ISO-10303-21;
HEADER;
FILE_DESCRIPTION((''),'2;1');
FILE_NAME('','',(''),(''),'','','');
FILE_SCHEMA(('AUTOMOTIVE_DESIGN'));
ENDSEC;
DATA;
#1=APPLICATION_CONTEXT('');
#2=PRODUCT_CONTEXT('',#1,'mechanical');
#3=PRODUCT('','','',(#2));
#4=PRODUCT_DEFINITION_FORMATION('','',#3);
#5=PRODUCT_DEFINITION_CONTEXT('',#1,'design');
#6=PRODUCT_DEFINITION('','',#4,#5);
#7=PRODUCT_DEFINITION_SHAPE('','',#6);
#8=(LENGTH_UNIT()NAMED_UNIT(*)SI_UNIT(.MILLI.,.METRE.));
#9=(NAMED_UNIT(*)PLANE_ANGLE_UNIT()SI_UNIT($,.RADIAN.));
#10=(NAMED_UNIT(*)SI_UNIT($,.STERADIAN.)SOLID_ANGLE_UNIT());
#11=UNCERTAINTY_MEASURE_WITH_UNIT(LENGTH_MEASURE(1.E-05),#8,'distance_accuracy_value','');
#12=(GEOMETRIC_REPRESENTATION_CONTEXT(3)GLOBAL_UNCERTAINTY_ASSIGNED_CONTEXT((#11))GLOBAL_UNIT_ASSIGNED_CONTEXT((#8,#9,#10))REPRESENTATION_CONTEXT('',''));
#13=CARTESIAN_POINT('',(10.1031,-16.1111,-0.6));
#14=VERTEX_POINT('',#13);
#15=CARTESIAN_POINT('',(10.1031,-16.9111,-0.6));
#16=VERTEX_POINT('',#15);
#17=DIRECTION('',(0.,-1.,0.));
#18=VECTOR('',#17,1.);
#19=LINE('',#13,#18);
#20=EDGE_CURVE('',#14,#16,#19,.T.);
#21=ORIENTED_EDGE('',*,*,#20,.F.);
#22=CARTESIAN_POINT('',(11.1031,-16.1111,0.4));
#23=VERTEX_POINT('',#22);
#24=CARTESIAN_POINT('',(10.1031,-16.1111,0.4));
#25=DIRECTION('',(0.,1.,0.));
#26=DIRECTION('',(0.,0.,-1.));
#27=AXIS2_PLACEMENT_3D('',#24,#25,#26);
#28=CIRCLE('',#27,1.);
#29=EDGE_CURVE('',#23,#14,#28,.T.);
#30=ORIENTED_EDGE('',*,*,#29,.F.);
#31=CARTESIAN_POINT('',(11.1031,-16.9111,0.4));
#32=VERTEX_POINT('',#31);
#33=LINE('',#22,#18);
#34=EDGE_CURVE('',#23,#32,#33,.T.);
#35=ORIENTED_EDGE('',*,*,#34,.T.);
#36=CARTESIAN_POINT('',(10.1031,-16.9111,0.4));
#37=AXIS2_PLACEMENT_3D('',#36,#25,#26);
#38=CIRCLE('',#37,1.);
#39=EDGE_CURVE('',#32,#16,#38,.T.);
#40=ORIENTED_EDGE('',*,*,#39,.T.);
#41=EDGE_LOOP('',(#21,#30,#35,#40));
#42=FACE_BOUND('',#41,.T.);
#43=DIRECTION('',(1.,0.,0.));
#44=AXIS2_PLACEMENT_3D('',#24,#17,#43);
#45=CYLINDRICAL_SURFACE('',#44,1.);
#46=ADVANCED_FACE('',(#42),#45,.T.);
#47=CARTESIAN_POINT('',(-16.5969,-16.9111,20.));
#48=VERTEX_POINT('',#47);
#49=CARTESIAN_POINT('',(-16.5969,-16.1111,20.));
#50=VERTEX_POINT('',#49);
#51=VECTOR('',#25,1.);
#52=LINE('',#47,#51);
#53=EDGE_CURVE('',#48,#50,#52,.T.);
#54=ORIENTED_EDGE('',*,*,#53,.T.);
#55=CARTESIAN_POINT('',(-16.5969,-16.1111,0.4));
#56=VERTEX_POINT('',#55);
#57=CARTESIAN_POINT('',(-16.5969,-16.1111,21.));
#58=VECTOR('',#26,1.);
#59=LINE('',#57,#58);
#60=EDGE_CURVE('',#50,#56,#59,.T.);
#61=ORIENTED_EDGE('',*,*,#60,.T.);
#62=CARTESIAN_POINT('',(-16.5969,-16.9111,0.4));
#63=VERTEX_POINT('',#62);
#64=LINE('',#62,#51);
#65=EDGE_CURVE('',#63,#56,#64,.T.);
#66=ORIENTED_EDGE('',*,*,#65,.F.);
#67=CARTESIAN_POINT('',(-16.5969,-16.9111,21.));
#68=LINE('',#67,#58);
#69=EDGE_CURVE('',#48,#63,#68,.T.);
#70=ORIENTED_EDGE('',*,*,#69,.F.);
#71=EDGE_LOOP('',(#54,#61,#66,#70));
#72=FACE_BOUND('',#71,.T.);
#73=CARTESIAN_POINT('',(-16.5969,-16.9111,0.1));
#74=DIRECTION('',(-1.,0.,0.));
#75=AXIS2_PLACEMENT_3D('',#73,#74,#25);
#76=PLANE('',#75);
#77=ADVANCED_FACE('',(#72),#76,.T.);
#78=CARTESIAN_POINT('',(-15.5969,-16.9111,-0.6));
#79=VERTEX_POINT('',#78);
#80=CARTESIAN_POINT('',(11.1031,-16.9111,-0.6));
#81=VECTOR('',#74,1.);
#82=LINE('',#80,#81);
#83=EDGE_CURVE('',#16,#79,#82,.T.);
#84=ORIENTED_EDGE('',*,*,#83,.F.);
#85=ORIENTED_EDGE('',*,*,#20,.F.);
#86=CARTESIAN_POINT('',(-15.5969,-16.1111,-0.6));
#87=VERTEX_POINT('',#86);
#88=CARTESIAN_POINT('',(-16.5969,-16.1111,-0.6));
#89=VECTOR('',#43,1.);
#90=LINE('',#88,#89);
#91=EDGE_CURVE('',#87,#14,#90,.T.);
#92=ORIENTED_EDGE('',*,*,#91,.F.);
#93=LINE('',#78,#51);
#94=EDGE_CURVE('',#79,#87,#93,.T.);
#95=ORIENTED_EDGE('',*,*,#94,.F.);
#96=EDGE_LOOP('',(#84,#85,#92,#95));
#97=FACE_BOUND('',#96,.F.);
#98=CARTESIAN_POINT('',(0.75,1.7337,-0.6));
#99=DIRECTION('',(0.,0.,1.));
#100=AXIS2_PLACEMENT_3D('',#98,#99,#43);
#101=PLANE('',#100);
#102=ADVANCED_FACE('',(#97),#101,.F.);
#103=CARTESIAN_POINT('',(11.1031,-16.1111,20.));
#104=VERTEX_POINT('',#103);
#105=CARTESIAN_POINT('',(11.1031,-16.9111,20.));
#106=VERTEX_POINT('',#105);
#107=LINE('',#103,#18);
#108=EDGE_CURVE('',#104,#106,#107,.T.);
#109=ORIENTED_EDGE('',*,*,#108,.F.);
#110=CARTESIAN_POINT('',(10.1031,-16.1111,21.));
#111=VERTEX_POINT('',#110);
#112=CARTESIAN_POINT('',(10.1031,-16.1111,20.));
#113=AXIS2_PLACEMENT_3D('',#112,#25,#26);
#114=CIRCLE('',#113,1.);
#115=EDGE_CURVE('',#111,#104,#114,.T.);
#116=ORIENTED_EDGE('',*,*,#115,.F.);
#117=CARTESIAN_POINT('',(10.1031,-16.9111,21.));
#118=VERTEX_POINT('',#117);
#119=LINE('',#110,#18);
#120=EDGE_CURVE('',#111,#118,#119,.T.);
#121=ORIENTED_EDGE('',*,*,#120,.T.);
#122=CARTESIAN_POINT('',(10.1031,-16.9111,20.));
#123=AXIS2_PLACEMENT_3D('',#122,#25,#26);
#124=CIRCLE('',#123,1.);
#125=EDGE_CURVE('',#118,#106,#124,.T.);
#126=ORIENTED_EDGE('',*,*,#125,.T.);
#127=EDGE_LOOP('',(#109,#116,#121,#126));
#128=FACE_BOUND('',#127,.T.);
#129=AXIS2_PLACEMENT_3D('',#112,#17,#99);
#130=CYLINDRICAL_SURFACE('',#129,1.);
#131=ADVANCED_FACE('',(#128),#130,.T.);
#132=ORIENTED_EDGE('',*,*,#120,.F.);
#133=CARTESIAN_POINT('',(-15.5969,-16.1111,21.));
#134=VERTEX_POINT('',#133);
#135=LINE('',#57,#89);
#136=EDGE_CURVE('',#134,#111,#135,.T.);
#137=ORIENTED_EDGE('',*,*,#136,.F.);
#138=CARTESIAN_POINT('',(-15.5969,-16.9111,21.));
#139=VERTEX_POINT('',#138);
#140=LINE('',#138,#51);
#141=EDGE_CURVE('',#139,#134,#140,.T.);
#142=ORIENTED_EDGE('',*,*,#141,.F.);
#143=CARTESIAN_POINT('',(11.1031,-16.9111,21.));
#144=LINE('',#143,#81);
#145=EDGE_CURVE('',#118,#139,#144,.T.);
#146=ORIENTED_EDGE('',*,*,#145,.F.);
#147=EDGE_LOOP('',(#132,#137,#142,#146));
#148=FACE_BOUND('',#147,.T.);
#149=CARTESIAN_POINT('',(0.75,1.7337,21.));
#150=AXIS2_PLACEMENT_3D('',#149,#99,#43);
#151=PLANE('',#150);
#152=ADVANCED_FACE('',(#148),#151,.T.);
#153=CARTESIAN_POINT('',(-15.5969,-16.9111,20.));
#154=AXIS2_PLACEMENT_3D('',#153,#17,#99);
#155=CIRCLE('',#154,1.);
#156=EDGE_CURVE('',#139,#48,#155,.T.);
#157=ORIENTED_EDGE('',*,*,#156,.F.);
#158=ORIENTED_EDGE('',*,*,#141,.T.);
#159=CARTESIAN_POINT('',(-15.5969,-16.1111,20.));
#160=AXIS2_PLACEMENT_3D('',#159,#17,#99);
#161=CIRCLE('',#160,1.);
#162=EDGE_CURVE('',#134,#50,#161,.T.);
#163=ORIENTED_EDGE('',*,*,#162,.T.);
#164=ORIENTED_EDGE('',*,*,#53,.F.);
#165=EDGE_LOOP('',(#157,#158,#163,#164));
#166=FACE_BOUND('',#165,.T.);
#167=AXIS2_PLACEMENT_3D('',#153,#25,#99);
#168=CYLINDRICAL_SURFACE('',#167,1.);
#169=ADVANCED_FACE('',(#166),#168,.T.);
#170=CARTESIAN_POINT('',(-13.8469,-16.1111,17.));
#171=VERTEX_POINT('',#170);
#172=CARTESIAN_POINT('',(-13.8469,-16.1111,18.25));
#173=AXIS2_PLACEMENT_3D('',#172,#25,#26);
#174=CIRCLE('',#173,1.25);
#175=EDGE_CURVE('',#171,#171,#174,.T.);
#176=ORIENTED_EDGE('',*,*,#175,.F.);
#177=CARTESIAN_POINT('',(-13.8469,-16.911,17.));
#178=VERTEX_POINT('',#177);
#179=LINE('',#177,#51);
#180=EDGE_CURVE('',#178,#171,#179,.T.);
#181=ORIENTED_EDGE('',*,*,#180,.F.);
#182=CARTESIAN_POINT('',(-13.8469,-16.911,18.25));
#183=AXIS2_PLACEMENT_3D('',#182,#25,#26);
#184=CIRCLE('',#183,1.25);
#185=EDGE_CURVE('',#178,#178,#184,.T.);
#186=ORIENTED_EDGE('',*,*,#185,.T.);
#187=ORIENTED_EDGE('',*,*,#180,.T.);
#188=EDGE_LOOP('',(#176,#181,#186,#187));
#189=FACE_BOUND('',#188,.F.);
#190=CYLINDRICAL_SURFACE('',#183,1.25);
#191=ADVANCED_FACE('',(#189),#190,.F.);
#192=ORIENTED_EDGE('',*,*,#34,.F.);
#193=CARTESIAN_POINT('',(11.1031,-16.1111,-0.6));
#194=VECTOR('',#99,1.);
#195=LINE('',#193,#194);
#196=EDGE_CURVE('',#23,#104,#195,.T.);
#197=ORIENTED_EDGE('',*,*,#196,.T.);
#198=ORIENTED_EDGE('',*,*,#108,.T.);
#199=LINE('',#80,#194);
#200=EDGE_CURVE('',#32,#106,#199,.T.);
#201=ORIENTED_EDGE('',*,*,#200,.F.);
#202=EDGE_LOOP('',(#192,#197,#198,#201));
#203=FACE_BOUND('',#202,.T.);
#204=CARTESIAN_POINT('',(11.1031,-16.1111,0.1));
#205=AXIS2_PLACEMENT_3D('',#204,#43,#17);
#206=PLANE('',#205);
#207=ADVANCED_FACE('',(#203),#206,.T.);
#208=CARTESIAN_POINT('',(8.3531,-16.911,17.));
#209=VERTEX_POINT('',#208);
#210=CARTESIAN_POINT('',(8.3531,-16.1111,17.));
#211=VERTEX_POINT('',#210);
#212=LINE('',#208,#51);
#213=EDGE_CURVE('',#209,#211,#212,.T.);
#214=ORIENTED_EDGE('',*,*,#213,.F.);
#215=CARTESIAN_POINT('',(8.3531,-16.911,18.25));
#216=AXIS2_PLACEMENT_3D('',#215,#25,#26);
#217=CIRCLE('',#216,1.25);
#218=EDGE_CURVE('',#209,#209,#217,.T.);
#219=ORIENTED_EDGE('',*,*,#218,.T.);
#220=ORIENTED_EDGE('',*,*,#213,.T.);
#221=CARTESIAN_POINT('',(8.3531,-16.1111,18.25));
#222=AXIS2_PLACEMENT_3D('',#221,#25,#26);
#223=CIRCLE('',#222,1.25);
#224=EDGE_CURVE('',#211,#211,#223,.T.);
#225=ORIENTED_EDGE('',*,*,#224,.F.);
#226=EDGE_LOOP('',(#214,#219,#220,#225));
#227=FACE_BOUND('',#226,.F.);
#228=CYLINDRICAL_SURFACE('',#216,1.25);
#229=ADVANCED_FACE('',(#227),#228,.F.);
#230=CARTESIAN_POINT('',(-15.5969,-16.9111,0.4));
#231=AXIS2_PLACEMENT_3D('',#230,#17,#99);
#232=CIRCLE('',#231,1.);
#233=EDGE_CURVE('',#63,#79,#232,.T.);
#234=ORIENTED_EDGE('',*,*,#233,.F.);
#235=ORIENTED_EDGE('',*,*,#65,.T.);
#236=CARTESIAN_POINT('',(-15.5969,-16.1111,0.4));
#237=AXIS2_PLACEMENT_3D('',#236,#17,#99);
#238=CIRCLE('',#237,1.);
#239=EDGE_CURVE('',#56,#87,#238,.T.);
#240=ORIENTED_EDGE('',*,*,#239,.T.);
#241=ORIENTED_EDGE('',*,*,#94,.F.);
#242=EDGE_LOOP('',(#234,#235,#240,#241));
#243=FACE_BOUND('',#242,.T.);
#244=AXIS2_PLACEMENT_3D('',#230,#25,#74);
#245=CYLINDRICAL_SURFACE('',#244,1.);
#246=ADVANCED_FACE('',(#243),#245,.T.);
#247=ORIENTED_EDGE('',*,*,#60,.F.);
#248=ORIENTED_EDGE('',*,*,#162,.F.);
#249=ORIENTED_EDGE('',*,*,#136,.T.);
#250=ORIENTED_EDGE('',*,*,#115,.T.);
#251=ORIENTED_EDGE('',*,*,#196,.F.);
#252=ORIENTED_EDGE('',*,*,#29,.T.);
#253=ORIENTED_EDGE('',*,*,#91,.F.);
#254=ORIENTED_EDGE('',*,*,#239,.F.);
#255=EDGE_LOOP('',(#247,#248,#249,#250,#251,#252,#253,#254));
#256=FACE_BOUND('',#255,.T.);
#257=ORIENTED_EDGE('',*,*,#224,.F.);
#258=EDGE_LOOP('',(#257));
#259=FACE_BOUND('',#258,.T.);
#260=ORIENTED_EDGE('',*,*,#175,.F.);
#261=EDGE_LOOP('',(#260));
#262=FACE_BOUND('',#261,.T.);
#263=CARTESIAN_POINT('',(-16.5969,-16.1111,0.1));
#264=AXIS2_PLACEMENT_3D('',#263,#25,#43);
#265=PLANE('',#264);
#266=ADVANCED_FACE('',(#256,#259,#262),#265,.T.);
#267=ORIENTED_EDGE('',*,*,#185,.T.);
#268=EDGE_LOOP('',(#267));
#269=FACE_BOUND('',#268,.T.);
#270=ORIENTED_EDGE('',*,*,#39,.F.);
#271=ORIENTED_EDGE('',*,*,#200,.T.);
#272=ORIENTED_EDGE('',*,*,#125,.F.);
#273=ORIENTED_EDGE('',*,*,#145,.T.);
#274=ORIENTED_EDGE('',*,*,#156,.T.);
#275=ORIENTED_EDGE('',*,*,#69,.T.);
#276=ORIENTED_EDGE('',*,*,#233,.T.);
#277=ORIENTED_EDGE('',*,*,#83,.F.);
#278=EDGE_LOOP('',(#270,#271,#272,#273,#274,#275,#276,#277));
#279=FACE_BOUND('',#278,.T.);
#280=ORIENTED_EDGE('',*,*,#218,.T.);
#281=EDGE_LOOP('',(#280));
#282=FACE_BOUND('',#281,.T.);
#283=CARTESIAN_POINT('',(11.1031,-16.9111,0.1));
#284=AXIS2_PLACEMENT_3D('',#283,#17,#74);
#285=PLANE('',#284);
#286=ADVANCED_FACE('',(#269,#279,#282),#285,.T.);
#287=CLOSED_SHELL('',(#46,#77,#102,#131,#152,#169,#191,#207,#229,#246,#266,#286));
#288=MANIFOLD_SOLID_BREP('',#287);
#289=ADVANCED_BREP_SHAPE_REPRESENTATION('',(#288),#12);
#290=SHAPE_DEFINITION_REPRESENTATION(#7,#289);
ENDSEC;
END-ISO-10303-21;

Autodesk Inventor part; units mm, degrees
ref_plane "YZ Plane" through (0, 0, 0) normal (1, 0, 0) x (0, 1, 0)
ref_plane "XZ Plane" through (0, 0, 0) normal (0, 1, 0) x (-1, 0, 0)
ref_plane "Work Plane1" through (0.75, 1.7337, 0.1) normal (0, 0, 1) x (1, 0, 0)
sketch "Sketch1" plane through (0.75, 1.7337, 0.1) normal (0, 0, 1) x (1, 0, 0)
  line L0 (14.9531, -9.2968) -> (14.9531, -22.3927) projected
  line L1 (14.9531, -9.2968) -> (11.1531, -9.2968) projected
  line L2 (-21.9469, -8.1274) -> (-21.9469, -20.8182) projected
  line L3 (-21.9469, -20.8182) -> (-17.7469, -20.8182) projected
  line L4 (10.3531, -18.6448) -> (-17.3469, -18.6448)
  line L5 (-17.3469, -18.6448) -> (-17.3469, -17.8448)
  line L6 (-17.3469, -17.8448) -> (10.3531, -17.8448)
  line L7 (10.3531, -17.8448) -> (10.3531, -18.6448)
  line L8 (14.9531, -22.3927) -> (10.7531, -22.3927) projected
  circle A0 centre (12.7531, -12.5861) radius 2 projected
  circle A1 centre (12.7531, -12.5861) radius 2 projected
  circle A2 centre (12.7531, -19.134) radius 2 projected
  circle A3 centre (12.7531, -19.134) radius 2 projected
  line L9 (11.1531, -10.0071) -> (11.1531, -9.2968) projected
  line L10 (11.1531, -10.0071) -> (10.7531, -10.0071) projected
  line L11 (10.7531, -12.5861) -> (10.7531, -10.0071) projected
  line L12 (10.7531, -19.134) -> (10.7531, -12.5861) projected
  line L13 (10.7531, -22.3927) -> (10.7531, -19.134) projected
  line L14 (-17.7469, -8.1274) -> (-17.7469, -20.8182) projected
  line L15 (-21.9469, -8.1274) -> (-17.7469, -8.1274) projected
  ellipse E0 centre (-19.8469, -17.6455) end of major axis (-21.8469, -17.6455) minor radius 1.9381 projected
  ellipse E1 centre (-19.8469, -11.3001) end of major axis (-21.8469, -11.3001) minor radius 1.9381 projected
  point P0 (-0.75, -1.7337)
  point P1 (-18.5469, -9.3259)
  dimension "d2" = 0.8
extrude "Extrusion1" add sketch "Sketch1" along normal blind 20.9 and the other way blind 0.7 contours L4 L5 L6 L7
sketch "Sketch3" plane through (-16.5969, -16.911, -0.6) normal (0, -1, 0) x (1, 0, 0)
  line L0 (27.7, 0) -> (0, 0) projected
  line L1 (27.7, 0) -> (27.7, 21.6) projected
  line L2 (0, 21.6) -> (27.7, 21.6) projected
  line L3 (0, 0) -> (0, 21.6) projected
  circle A0 centre (24.95, 18.85) radius 2.75
  circle A1 centre (2.75, 18.85) radius 2.75
  line L4 (27.7, 21.6) -> (27.7, 0)
  line L5 (0, 0) -> (0, 21.6)
  point P0 (16.5969, 0.6)
  dimension "d17" = 5.5
  dimension "d18" = 5.5
  dimension "d19" = 0
  dimension "d20" = 0
hole "Hole1" at (8.3531, -16.911, 18.25) at (-13.8469, -16.911, 18.25) direction (0, 1, 0) diameter 2.5 end through all
fillet "Fillet1" radius 1 4 edges at (11.1031, -16.511, -0.6) (-16.5969, -16.511, -0.6) (-16.5969, -16.511, 21) (11.1031, -16.511, 21)
properties part number "PCB_Controller"
